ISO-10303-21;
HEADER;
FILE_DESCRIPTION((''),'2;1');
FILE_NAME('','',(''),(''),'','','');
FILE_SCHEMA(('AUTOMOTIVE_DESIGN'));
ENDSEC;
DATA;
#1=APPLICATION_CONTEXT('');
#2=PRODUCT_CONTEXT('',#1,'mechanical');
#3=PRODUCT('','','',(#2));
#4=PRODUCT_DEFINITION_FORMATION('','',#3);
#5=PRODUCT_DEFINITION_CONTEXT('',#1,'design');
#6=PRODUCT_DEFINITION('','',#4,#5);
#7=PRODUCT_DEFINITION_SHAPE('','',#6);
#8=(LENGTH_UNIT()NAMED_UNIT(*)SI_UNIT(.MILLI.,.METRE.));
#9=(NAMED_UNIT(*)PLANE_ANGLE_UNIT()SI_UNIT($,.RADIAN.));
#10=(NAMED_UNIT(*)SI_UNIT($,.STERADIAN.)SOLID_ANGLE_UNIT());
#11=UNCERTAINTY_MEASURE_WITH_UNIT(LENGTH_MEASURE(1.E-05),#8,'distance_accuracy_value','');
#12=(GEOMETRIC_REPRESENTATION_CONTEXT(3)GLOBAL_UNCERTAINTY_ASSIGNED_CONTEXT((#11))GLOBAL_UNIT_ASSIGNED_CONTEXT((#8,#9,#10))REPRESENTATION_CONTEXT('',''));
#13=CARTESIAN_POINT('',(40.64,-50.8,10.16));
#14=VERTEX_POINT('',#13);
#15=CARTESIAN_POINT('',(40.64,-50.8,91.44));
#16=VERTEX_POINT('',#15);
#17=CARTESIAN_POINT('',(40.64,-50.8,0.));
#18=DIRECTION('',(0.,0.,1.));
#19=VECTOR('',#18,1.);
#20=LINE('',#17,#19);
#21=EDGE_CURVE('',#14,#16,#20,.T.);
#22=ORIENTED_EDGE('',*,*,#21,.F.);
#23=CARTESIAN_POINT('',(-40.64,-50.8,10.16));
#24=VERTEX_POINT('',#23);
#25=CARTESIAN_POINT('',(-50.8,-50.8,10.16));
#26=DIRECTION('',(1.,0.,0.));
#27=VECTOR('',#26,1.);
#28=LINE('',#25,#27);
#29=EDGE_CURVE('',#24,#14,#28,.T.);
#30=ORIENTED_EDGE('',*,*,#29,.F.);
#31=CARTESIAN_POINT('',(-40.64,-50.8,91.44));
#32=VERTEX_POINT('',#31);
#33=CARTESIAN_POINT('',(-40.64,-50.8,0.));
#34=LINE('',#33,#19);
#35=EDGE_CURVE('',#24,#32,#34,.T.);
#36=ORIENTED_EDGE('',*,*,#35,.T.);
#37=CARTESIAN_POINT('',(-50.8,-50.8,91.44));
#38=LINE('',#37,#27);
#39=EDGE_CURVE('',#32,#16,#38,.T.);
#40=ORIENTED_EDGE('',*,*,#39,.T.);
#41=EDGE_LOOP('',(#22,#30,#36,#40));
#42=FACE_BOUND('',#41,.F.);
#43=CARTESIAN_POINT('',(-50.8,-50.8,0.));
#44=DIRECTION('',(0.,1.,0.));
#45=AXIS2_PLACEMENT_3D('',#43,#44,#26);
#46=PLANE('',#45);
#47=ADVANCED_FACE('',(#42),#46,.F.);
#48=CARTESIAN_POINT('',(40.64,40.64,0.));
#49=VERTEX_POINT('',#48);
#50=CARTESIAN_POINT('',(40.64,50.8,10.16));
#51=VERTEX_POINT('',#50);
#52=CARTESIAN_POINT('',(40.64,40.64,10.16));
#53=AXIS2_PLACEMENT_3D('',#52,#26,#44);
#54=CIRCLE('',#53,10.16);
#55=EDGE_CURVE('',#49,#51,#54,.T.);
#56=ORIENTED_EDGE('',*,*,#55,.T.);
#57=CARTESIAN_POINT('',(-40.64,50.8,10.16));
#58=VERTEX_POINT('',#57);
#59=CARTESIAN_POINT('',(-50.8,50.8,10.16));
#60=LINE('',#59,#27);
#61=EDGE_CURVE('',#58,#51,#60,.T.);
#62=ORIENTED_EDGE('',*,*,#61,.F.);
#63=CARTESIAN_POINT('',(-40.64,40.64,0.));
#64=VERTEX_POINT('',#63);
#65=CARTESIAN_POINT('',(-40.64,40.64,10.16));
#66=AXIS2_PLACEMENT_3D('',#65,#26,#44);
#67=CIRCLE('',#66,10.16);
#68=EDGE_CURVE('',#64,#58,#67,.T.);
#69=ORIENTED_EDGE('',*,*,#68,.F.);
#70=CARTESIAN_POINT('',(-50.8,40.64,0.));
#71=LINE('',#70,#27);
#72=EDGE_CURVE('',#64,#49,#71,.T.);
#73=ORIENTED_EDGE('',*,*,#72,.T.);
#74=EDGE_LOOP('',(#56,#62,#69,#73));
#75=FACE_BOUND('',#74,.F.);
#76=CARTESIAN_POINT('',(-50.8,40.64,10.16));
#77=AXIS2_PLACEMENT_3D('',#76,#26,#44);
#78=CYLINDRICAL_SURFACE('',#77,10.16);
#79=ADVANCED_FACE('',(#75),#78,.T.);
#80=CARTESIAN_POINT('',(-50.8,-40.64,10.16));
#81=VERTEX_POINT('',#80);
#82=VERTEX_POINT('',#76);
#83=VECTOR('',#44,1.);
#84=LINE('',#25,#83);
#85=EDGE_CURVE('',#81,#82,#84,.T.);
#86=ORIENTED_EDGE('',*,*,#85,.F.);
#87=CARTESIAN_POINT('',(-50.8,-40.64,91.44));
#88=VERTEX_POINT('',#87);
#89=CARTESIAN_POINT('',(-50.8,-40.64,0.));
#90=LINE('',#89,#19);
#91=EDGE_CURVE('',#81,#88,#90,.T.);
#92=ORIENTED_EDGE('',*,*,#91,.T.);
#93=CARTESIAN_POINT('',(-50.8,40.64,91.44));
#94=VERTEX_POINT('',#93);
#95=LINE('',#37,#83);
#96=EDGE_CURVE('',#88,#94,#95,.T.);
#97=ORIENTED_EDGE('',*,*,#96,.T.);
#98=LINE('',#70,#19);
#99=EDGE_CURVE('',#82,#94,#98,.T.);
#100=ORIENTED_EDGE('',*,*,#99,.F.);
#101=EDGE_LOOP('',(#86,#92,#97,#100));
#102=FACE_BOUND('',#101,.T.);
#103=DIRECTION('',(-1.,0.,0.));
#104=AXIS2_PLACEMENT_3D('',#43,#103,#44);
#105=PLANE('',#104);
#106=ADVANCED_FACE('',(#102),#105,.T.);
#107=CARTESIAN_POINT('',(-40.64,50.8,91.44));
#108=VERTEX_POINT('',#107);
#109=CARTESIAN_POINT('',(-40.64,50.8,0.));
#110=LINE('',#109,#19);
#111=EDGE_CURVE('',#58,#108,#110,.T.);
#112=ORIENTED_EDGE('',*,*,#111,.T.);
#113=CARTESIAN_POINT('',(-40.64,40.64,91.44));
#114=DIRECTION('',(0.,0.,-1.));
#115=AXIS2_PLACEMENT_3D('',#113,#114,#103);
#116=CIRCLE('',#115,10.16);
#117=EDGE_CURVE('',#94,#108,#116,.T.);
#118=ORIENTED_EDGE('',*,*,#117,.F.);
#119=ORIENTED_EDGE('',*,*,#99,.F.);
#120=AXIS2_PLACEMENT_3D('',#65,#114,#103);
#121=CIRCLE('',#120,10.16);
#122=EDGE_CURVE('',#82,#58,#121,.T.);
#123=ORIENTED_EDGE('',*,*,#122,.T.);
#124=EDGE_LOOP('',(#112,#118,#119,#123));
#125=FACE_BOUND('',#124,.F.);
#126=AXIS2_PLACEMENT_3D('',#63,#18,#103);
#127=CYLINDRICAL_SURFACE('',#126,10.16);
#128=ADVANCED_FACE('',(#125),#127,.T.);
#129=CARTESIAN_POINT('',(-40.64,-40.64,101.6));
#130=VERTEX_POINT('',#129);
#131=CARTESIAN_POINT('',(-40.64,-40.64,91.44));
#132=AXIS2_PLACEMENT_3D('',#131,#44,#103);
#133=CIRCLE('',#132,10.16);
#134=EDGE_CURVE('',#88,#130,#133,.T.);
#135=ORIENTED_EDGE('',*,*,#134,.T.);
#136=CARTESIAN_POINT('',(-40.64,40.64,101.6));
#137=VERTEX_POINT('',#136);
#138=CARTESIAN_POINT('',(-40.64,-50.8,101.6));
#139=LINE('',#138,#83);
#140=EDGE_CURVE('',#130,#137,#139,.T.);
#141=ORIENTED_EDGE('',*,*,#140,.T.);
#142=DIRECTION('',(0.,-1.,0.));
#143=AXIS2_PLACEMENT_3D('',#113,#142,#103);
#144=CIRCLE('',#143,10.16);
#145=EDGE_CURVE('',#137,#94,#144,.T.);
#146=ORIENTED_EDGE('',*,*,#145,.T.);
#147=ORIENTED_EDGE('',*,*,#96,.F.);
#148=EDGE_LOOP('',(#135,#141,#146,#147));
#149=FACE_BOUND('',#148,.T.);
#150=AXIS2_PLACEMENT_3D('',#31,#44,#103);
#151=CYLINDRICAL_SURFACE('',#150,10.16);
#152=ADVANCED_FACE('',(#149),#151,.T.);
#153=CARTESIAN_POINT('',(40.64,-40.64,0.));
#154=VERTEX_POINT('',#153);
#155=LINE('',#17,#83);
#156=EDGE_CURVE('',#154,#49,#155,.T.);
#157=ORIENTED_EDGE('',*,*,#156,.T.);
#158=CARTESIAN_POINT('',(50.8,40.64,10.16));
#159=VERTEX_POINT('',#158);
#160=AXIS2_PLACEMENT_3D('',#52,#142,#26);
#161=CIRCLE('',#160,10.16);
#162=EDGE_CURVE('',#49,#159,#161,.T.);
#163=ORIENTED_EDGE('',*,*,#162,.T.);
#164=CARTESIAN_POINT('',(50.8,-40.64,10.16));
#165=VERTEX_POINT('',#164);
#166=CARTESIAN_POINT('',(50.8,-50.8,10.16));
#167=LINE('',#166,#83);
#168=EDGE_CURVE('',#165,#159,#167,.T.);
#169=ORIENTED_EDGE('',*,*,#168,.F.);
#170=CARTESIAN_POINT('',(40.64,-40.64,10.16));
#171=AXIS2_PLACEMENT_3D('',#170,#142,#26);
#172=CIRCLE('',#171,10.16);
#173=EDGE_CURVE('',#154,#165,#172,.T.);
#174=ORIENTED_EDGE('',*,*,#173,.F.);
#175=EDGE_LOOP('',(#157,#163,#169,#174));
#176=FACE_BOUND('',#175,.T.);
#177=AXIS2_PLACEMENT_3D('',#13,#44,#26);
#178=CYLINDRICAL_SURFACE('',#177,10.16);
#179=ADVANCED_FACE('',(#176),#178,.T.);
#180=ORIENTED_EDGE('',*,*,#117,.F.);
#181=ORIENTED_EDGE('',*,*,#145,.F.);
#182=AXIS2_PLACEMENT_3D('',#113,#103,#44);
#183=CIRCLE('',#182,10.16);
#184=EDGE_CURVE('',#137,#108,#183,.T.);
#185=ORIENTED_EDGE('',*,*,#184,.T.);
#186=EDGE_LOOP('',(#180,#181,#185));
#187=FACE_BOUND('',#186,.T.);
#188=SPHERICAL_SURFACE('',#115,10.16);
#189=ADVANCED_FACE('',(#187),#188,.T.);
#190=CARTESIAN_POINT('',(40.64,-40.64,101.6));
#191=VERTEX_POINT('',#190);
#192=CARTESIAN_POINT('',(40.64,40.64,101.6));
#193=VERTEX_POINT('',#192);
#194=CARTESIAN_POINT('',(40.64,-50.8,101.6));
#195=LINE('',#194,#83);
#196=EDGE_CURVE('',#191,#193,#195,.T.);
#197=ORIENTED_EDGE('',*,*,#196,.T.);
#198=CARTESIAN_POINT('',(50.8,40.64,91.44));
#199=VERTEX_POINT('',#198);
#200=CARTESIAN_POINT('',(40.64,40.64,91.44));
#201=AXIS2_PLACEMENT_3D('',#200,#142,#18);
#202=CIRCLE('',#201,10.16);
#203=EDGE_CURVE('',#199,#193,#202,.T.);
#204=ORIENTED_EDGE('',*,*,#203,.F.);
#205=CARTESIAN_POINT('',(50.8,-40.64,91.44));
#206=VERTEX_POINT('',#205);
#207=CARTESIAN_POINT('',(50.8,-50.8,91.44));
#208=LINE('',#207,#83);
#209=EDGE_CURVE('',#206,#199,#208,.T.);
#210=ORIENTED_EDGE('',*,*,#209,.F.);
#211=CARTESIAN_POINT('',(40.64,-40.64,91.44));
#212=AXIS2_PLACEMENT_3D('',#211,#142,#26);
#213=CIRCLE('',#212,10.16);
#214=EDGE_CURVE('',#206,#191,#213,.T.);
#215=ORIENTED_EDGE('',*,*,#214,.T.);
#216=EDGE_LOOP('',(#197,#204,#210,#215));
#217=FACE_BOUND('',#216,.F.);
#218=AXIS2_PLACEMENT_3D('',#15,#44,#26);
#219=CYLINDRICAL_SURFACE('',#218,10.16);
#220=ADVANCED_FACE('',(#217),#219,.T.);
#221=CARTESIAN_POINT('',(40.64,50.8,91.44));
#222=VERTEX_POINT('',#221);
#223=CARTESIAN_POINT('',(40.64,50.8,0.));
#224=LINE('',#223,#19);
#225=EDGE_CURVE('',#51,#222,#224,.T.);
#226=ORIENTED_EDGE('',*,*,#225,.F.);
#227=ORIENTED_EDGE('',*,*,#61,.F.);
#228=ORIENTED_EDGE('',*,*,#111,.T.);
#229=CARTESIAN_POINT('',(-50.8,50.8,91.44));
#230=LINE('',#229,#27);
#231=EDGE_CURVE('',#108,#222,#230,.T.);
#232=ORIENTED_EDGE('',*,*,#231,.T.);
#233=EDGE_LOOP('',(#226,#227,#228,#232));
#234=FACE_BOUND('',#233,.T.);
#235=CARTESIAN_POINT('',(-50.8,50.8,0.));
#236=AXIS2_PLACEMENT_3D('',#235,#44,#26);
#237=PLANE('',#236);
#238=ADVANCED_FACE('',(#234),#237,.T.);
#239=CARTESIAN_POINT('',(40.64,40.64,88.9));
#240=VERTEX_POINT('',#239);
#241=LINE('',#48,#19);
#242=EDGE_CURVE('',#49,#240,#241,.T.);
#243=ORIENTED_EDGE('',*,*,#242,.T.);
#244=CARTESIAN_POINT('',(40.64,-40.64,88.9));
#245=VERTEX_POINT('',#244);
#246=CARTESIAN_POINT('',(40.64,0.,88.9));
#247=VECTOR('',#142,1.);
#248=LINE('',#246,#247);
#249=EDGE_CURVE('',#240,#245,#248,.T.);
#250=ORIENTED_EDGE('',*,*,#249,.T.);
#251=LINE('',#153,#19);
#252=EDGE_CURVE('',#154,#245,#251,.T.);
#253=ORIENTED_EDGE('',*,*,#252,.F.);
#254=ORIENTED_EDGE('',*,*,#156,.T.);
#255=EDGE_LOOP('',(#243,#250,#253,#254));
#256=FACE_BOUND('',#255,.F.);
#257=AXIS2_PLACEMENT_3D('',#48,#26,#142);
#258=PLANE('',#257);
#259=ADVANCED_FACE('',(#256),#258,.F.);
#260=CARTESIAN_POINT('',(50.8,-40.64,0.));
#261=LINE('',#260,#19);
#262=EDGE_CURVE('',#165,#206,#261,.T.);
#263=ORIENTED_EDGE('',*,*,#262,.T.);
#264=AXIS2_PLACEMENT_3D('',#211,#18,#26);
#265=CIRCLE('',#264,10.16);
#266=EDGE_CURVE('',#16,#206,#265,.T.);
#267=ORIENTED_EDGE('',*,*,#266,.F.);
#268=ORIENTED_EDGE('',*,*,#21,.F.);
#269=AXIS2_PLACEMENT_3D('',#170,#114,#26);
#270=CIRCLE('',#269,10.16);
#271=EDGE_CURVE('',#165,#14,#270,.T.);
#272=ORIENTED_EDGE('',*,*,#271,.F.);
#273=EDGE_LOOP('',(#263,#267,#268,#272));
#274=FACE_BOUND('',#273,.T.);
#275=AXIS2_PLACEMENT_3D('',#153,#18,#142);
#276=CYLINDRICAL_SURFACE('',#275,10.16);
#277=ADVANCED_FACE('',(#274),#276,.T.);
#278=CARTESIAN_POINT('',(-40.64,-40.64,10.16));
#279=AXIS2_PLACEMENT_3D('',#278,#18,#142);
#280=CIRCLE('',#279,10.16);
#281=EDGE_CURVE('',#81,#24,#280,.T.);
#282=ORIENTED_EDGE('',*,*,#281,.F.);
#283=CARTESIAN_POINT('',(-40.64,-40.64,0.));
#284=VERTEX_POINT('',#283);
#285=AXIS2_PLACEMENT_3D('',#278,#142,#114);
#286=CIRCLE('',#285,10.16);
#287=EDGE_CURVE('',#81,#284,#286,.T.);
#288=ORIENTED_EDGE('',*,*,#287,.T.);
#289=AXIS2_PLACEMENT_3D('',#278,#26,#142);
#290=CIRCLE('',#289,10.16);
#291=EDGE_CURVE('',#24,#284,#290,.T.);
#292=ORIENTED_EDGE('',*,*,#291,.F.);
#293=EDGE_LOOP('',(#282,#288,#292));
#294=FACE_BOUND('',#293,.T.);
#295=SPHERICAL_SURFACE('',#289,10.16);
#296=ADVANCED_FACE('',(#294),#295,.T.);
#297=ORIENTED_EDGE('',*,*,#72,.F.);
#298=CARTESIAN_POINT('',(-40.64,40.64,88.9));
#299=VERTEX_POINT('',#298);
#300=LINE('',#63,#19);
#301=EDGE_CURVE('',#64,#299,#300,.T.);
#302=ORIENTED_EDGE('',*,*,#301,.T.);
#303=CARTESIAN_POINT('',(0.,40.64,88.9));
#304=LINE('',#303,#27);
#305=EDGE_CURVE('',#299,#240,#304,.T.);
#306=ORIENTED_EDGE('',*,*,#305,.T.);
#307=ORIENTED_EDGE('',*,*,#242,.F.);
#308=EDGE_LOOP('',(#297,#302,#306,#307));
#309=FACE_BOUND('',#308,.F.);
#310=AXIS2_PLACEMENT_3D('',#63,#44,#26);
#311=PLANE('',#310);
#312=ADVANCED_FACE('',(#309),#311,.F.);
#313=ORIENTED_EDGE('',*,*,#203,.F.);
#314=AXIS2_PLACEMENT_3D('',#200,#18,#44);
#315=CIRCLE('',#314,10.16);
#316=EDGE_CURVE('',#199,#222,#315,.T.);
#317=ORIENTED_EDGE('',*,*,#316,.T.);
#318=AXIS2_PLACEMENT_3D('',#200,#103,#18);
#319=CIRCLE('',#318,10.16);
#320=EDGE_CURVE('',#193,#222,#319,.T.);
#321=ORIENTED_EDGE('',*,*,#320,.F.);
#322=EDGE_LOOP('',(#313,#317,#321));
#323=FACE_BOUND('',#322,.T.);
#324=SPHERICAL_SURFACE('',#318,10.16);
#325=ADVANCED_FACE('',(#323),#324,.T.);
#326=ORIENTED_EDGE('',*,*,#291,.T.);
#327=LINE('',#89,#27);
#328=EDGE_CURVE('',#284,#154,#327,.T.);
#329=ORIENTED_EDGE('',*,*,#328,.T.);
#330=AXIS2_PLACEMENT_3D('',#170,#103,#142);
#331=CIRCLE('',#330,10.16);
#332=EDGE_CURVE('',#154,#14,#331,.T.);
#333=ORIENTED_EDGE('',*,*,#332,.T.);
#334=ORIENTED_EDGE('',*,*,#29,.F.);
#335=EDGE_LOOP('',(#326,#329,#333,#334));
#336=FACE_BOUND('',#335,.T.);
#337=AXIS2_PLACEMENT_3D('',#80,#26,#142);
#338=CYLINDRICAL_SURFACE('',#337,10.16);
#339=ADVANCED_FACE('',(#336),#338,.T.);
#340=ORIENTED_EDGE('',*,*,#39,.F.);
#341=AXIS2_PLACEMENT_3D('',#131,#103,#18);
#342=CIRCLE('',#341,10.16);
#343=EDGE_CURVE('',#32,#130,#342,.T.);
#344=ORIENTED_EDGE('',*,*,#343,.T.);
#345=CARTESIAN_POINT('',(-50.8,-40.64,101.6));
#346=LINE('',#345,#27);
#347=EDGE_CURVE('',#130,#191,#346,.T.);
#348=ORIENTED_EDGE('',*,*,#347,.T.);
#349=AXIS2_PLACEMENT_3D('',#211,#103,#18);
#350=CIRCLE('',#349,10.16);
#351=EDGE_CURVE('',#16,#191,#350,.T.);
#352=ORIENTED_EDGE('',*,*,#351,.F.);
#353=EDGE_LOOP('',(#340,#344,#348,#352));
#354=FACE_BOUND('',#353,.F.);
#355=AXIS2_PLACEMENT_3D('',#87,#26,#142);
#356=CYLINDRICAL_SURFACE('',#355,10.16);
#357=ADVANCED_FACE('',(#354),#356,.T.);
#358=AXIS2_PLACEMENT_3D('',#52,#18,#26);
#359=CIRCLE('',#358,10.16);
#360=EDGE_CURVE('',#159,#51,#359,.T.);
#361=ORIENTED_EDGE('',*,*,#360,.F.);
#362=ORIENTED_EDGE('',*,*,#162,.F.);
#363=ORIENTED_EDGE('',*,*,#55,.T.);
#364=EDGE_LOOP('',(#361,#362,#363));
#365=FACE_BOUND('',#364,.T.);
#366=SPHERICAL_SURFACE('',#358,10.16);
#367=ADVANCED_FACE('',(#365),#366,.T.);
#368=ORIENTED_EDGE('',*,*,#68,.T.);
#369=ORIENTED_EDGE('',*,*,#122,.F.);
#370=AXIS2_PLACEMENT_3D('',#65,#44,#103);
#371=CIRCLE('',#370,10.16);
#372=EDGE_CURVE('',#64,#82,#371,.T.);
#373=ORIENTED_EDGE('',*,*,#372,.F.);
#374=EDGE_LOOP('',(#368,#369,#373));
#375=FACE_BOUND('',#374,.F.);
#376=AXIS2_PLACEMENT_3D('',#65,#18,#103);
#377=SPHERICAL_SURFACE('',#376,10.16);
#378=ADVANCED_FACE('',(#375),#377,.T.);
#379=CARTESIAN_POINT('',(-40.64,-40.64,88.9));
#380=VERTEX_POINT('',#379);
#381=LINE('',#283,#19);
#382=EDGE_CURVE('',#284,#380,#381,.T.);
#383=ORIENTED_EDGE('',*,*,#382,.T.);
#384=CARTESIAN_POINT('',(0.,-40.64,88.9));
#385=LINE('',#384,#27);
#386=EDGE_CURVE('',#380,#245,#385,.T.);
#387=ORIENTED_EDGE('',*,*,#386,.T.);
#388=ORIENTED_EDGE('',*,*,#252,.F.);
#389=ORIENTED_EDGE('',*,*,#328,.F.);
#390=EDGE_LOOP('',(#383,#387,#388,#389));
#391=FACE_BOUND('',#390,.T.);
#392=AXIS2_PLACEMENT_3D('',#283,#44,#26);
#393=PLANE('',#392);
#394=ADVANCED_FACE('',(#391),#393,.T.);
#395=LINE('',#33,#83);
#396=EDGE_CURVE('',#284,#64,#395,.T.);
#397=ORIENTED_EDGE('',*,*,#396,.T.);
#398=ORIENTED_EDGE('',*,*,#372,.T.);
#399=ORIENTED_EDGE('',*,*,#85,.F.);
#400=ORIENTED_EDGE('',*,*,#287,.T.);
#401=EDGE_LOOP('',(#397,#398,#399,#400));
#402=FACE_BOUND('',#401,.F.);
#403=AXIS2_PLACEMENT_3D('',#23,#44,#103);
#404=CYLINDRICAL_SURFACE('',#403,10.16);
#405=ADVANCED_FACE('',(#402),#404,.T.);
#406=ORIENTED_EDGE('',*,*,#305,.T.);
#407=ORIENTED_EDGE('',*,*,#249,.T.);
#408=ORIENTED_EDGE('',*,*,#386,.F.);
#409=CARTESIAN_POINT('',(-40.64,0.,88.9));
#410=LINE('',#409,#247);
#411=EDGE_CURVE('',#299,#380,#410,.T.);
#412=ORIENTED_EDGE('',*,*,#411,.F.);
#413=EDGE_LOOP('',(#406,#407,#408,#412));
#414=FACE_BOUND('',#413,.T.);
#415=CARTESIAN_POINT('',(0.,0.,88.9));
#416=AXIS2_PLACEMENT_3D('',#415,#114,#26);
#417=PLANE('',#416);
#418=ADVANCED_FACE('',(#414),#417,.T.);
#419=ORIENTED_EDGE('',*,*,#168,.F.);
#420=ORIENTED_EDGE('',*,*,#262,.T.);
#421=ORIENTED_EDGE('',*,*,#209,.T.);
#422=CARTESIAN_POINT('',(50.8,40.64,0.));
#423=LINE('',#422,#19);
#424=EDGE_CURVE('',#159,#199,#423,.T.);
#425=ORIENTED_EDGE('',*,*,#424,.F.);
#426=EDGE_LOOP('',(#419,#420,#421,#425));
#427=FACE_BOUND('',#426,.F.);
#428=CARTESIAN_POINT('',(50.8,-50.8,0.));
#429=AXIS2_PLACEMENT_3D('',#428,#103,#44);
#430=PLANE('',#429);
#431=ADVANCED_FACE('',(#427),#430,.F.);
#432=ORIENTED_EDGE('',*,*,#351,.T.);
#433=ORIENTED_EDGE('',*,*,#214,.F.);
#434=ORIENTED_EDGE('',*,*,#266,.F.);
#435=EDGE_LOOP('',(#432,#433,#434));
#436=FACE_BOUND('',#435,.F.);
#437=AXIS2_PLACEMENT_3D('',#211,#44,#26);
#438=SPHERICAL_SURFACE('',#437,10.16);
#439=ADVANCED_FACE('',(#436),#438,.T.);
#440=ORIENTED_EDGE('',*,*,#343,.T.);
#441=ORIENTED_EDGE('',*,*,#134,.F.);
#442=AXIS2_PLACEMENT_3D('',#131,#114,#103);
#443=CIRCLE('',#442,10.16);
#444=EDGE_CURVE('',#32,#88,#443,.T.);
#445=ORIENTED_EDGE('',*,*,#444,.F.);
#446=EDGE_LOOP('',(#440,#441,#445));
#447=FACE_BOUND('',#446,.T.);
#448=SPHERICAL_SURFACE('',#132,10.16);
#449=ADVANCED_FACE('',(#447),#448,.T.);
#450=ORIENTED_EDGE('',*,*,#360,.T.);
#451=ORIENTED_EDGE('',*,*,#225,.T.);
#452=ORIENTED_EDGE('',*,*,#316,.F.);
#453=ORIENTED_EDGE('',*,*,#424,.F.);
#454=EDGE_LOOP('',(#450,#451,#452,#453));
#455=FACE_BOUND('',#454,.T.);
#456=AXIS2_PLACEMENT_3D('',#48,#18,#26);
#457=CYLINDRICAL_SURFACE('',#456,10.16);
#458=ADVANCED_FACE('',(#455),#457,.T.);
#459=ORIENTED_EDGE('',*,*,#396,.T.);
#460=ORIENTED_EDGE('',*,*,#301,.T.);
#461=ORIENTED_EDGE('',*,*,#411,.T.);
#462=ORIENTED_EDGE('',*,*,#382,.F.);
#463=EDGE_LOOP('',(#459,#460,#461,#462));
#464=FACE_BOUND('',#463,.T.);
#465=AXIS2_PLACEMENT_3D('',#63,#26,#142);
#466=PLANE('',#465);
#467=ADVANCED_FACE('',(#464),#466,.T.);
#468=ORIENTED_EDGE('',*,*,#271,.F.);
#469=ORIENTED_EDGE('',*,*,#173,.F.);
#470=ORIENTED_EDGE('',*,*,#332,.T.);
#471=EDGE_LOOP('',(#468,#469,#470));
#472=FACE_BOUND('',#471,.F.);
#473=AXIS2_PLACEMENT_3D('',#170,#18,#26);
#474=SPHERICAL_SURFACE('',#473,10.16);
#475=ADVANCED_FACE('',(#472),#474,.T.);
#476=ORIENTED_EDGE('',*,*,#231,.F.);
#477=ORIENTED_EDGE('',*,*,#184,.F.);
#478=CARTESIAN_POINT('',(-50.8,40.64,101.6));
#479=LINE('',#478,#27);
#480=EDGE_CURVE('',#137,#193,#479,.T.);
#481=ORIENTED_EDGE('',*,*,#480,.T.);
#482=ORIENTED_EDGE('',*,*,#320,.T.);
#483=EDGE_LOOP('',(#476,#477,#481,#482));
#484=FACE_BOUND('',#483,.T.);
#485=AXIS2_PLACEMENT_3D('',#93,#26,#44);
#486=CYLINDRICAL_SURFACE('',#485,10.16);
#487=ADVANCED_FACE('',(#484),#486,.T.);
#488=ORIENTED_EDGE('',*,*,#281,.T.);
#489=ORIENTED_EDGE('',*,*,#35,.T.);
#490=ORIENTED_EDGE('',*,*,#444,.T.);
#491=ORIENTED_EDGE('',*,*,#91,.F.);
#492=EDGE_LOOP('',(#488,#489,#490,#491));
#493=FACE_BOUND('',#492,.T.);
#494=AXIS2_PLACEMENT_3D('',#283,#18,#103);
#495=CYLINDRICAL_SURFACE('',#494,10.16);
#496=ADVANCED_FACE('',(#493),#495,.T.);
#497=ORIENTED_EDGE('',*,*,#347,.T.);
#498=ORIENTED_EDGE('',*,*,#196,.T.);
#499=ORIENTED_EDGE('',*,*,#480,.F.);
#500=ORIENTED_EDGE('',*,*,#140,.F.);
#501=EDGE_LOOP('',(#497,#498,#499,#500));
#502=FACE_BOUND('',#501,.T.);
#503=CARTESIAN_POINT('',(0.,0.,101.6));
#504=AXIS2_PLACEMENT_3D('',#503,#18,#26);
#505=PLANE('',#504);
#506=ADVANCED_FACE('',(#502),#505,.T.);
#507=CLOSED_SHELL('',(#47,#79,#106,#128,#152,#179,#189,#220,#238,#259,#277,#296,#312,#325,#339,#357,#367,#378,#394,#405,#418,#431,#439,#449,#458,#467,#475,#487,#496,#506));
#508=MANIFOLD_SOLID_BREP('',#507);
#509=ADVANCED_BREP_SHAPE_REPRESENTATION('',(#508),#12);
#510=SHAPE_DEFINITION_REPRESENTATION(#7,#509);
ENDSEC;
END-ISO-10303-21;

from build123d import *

# Parameters (mm, degrees)
F0_W      = 101.6
F0_H      = 101.6
F1_DEPTH  = 101.6
F2_R      = 50.8
F3_DEPTH  = 101.6
F9_W      = 101.6
F9_H      = 101.6
F10_DEPTH = 101.6
F11_R     = 10.16
F12_W     = 81.28
F12_H     = 81.28
F14_DEPTH = 88.9


# Not quite as in the source:
# - a feature of the source that left no trace in its solid (it failed there, or was rolled back) is left out


with BuildPart() as f1:
    # F0 (on Top) → F1 (new body)
    with BuildSketch(Plane.XY):
        Rectangle(F0_W, F0_H)
    extrude(amount=F1_DEPTH)


with BuildPart() as f3:
    # F2 (on Top) → F3 (new body)
    with BuildSketch(Plane.XY):
        Circle(F2_R)
    extrude(amount=F3_DEPTH)


with BuildPart() as f5:
    # F4 (on Front) → F5 (revolve)
    with BuildSketch(Plane.XZ):
        with BuildLine():
            Line((-42.8895973013, 27.2235641188), (42.8895973013, -27.2235641188))
            ThreePointArc((42.8895973013, -27.2235641188), (27.2235641188, 42.8895973013), (-42.8895973013, 27.2235641188))
        make_face()
    revolve(axis=Axis((0, 0, 0), (0.8442834114, 0, -0.5358969315)))


with BuildPart() as f10:
    # F9 (on Top) → F10 (new body)
    with BuildSketch(Plane.XY):
        Rectangle(F9_W, F9_H)
    extrude(amount=F10_DEPTH)

    # F11
    f11_edges = [f10.edges().sort_by_distance(p)[0] for p in [
        (-50.8, 50.8, 50.8),
        (-50.8, 0, 101.6),
        (0, 50.8, 101.6),
        (50.8, 0, 101.6),
        (50.8, 50.8, 50.8),
        (50.8, -50.8, 50.8),
        (50.8, 0, 0),
        (0, -50.8, 0),
        (-50.8, -50.8, 50.8),
        (-50.8, 0, 0),
        (0, 50.8, 0),
        (0, -50.8, 101.6),
    ]]
    fillet(f11_edges, radius=F11_R)

    # F12 (on face) → F14 (cut)
    with BuildSketch(Plane(origin=(0, 0, 0), x_dir=(1, 0, 0), z_dir=(0, 0, -1))):
        Rectangle(F12_W, F12_H)
    extrude(amount=-F14_DEPTH, mode=Mode.SUBTRACT)


solid = f10.part
